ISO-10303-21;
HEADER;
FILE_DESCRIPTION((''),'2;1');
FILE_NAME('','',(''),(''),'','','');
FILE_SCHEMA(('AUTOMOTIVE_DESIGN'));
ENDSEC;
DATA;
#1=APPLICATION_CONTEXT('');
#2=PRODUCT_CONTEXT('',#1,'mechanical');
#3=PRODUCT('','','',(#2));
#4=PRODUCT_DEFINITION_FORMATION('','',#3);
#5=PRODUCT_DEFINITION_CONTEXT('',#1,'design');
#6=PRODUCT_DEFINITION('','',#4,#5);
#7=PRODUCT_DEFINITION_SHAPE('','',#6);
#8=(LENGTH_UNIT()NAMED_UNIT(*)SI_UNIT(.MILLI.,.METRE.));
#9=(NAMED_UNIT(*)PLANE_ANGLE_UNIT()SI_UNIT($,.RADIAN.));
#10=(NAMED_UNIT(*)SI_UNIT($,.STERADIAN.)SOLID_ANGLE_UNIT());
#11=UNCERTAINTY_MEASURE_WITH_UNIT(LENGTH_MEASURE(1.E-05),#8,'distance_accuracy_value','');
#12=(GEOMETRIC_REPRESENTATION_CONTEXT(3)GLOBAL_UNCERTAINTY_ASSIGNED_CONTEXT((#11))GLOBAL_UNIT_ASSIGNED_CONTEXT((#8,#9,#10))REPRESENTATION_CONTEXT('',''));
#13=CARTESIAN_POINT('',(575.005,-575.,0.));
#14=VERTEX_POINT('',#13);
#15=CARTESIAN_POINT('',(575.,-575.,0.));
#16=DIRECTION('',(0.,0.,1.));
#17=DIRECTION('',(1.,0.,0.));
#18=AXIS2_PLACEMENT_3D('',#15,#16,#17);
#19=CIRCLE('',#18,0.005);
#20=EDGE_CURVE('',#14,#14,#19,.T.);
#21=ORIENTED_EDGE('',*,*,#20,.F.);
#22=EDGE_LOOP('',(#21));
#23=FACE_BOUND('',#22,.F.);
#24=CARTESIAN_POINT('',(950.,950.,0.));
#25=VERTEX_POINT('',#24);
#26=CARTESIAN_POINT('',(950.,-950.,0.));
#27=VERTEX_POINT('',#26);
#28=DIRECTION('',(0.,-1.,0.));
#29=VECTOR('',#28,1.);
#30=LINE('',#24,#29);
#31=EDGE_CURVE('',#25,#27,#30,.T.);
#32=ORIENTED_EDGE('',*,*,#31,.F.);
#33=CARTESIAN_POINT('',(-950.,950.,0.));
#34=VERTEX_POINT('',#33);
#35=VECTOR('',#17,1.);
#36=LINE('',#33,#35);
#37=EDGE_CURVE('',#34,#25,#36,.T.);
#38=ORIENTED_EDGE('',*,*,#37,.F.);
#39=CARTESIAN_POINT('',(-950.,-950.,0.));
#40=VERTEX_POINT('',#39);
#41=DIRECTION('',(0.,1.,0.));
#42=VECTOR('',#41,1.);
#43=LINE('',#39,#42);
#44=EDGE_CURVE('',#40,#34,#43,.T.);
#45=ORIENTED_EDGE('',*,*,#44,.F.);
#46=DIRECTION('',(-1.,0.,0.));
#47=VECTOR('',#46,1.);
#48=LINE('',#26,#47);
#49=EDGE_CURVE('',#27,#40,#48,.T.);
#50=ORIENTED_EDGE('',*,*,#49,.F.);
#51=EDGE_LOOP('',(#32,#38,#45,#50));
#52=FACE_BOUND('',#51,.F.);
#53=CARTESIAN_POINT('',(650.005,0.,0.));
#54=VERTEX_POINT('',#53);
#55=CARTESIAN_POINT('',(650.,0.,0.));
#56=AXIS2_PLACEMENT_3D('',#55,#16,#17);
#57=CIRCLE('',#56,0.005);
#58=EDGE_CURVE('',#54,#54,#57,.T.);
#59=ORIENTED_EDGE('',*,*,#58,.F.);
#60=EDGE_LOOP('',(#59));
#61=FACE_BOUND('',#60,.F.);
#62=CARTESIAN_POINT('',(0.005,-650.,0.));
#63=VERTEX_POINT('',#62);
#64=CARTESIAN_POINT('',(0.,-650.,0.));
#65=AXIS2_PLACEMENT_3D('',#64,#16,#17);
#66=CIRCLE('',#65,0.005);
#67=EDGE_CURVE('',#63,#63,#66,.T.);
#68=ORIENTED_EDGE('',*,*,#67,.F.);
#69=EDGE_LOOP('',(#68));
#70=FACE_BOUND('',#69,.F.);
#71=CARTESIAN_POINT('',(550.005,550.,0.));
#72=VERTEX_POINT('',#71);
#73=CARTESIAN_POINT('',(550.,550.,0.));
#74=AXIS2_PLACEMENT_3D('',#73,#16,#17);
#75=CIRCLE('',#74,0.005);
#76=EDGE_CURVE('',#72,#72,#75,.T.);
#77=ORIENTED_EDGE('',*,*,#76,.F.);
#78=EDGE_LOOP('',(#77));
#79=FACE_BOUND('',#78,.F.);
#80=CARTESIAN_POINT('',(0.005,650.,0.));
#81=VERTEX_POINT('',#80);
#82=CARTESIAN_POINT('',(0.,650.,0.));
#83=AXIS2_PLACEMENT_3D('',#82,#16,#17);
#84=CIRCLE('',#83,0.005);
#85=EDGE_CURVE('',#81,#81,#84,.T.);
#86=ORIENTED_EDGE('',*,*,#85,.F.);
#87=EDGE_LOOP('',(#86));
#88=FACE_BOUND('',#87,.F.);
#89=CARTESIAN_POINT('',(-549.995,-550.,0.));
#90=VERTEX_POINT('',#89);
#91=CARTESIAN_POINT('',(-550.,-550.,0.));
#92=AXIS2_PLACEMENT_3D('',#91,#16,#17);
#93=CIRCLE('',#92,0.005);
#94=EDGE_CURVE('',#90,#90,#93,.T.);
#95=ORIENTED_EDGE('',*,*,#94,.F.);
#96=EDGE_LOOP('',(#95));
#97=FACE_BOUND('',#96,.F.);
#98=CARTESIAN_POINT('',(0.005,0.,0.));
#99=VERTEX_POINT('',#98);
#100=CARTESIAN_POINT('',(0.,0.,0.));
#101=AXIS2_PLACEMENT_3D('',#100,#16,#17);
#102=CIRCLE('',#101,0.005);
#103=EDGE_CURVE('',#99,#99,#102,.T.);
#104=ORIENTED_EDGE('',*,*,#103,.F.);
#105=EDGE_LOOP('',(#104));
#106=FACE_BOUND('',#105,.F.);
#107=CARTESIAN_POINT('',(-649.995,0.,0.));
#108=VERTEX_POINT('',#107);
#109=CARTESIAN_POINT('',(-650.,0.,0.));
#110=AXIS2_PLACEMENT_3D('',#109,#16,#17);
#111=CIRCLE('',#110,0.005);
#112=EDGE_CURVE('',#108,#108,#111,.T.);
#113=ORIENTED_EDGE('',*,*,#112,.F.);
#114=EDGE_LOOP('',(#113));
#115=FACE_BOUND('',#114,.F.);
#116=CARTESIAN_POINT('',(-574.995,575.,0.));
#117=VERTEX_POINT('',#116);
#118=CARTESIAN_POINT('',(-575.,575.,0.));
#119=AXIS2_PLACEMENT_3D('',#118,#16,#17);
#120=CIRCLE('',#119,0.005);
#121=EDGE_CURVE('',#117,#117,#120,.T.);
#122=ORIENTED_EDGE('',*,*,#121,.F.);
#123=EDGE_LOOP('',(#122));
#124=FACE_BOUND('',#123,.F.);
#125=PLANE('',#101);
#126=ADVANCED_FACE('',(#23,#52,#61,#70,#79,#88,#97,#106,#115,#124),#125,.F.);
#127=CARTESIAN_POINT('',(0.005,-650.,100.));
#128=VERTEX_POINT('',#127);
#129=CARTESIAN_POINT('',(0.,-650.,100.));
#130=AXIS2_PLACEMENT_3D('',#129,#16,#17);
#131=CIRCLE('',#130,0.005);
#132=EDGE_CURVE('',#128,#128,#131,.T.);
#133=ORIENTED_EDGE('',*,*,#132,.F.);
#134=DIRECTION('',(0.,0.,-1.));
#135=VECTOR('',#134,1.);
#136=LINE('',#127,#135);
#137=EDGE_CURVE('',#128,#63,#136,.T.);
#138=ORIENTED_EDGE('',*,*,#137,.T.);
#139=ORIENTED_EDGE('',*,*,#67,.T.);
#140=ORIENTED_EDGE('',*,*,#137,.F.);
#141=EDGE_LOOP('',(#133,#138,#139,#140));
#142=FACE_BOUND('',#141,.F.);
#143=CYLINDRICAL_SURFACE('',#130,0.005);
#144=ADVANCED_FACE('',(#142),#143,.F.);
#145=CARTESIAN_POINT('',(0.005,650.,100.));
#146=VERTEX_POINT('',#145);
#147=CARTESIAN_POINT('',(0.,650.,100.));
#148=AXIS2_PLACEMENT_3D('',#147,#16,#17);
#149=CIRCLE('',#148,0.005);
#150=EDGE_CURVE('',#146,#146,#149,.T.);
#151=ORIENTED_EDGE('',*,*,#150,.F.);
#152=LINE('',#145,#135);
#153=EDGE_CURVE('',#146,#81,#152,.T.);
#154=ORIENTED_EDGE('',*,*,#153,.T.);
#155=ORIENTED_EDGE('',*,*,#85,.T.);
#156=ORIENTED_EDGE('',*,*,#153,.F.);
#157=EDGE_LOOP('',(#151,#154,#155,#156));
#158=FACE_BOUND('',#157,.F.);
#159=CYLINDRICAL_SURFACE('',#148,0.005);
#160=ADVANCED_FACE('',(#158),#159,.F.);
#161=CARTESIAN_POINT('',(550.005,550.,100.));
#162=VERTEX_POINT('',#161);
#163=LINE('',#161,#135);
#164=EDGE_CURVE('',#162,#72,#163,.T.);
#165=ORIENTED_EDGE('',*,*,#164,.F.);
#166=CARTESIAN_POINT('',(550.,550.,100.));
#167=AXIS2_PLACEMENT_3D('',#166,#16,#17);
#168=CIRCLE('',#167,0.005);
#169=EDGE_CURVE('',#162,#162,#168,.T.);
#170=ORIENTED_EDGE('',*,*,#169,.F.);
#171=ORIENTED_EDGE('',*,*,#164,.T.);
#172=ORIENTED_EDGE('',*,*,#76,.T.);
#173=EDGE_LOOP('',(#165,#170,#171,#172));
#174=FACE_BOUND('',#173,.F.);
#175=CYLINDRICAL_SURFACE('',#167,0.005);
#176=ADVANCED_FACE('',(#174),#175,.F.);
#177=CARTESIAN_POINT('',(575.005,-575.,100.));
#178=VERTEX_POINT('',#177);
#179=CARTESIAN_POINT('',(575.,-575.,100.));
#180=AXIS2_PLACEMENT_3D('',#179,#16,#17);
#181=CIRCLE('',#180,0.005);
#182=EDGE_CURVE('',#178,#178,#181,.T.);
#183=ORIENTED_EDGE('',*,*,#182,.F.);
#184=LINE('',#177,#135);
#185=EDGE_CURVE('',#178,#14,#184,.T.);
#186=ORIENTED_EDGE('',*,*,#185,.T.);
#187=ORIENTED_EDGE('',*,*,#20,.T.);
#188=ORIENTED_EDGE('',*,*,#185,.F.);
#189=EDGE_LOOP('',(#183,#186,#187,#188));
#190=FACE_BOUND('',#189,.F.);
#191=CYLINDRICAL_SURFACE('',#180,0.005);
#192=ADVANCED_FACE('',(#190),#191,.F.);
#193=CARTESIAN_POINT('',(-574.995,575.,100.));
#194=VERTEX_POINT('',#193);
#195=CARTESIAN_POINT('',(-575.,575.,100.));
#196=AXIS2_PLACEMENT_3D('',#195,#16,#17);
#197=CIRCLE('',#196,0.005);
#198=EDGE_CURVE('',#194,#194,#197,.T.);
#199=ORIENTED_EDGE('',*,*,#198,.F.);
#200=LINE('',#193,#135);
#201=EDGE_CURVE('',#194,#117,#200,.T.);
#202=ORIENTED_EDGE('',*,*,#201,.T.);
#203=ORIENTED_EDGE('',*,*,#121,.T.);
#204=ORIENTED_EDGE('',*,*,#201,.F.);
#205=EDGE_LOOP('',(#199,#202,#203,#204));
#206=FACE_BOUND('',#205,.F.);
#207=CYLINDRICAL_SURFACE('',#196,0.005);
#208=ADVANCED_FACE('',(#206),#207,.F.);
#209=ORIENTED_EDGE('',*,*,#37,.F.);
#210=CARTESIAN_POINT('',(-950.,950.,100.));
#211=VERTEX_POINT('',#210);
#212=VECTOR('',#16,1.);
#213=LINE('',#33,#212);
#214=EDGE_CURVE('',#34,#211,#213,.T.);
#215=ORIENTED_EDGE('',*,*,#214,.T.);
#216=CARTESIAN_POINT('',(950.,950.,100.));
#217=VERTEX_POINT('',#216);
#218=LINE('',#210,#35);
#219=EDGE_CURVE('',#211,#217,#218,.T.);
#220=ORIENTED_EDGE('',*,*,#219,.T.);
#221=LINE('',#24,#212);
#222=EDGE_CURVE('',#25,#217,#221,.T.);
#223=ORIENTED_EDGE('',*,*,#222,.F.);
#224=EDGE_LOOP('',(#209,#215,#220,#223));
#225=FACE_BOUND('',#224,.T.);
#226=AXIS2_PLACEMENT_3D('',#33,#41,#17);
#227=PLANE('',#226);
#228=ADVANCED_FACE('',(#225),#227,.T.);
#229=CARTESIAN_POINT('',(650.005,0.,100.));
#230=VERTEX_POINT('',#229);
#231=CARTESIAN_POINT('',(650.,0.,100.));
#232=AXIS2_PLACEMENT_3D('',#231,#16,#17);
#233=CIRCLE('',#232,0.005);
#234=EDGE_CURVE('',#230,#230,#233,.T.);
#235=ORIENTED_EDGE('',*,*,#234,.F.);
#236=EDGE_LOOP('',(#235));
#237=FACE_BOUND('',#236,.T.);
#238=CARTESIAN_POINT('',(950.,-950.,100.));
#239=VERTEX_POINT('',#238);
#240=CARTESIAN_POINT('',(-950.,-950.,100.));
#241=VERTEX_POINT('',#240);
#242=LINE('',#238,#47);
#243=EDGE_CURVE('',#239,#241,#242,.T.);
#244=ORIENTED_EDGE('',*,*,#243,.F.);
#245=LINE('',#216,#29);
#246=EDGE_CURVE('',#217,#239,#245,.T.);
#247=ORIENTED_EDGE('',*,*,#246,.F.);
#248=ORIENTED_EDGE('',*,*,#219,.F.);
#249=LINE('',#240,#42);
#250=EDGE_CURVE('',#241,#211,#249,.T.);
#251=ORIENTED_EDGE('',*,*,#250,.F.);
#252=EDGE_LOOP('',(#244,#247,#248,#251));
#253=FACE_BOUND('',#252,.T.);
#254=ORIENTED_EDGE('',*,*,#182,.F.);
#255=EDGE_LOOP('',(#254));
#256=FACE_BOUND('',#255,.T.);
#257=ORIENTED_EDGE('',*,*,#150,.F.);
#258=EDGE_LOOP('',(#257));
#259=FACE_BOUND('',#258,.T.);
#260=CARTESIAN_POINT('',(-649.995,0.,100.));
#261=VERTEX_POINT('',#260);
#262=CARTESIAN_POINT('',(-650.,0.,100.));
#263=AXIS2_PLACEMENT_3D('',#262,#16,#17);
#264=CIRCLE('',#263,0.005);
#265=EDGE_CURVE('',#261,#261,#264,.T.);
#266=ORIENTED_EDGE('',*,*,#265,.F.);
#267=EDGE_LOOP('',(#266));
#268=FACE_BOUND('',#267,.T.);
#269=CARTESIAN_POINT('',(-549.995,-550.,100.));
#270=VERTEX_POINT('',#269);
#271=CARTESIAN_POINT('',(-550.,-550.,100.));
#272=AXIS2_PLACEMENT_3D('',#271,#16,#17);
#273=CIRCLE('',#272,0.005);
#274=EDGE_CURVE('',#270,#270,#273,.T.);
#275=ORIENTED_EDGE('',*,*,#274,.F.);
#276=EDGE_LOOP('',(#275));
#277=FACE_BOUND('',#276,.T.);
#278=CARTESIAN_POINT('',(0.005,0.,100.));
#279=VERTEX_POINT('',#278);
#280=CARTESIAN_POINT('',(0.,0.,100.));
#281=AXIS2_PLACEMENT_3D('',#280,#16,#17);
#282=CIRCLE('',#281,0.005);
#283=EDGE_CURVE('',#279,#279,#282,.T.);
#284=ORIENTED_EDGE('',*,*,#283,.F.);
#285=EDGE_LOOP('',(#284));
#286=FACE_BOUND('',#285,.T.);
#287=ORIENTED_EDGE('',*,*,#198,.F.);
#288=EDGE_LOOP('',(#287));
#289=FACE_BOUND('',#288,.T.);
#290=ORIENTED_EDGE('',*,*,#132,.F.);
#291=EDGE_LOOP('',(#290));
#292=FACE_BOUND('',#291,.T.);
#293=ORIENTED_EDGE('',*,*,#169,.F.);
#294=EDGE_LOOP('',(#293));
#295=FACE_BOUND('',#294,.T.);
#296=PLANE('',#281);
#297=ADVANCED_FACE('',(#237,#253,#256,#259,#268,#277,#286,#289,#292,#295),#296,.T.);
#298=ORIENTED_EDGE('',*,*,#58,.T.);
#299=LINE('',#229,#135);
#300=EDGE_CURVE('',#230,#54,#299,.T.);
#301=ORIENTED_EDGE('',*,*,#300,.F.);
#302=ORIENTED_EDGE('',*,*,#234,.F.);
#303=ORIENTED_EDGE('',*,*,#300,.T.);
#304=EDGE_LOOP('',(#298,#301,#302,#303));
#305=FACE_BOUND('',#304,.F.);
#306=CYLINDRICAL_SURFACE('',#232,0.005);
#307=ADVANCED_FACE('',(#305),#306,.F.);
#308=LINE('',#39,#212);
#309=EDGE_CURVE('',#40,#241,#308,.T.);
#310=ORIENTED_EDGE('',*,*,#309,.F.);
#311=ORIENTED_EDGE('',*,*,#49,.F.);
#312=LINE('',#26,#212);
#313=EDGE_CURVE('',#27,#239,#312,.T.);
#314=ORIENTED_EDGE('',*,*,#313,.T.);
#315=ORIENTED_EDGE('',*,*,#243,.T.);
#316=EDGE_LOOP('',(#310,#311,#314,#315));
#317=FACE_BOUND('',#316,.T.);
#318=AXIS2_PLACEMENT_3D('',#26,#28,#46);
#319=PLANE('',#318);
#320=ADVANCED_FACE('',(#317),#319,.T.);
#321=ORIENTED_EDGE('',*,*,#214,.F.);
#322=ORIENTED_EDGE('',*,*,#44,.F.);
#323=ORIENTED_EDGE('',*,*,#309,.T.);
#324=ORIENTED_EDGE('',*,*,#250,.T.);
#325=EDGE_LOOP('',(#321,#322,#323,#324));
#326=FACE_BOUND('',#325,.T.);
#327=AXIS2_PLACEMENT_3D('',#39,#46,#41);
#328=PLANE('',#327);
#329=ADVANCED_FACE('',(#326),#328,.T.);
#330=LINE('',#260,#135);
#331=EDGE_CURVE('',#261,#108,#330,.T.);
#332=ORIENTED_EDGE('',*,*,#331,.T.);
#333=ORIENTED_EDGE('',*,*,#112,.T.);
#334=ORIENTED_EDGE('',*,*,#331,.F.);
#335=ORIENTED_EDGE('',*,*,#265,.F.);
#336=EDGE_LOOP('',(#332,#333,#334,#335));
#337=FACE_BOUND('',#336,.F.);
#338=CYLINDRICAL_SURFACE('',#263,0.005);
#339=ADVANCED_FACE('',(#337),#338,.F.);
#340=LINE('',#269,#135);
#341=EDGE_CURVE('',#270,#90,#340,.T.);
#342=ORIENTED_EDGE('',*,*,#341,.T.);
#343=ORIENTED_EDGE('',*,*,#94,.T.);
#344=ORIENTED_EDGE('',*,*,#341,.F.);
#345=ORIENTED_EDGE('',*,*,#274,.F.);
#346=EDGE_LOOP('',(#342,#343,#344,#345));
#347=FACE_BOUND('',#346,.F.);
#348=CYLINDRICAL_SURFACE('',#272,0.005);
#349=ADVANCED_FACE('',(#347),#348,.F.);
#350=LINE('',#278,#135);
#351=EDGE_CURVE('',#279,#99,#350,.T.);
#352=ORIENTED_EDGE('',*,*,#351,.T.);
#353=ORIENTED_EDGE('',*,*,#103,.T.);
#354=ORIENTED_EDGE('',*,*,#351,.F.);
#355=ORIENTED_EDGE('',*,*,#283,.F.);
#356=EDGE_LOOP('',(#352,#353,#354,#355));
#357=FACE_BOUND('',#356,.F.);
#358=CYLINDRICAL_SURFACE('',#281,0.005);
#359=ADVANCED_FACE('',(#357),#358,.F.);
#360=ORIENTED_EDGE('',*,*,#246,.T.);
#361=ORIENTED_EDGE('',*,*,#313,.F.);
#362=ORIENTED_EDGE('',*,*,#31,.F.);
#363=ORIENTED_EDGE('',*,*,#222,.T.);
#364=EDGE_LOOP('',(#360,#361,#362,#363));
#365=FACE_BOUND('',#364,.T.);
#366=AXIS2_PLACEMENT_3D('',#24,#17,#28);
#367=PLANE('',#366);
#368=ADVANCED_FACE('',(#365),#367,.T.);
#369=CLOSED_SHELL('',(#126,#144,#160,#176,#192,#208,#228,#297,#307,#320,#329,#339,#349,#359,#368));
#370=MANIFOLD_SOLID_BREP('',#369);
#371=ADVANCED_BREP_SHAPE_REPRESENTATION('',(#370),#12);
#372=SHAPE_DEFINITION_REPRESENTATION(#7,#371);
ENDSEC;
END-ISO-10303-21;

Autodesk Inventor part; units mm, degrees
ref_plane "YZ Plane" through (0, 0, 0) normal (1, 0, 0) x (0, 1, 0)
ref_plane "XZ Plane" through (0, 0, 0) normal (0, 1, 0) x (-1, 0, 0)
ref_plane "XY Plane" through (0, 0, 0) normal (0, 0, 1) x (1, 0, 0)
sketch "スケッチ1" plane through (0, 0, 0) normal (0, 0, 1) x (1, 0, 0)
  line L0 (-950, -950) -> (-950, 950)
  line L1 (-950, 950) -> (950, 950)
  line L2 (950, 950) -> (950, -950)
  line L3 (950, -950) -> (-950, -950)
  point P0 (0, 0)
  point P1 (0, 0)
  dimension "d0" = 1900
extrude "押し出し1" add sketch "スケッチ1" along normal blind 100
sketch "スケッチ3" plane through (0, 0, 100) normal (0, 0, 1) x (1, 0, 0)
  circle A0 centre (0, 0) radius 0.005
  line L0 (-950, 950) -> (-950, -950) projected
  line L1 (-950, -950) -> (950, -950) projected
  line L2 (950, -950) -> (950, 950) projected
  line L3 (950, 950) -> (-950, 950) projected
  line L4 (-950, 950) -> (-950, 575)
  line L5 (-950, 950) -> (-950, -950) projected
  line L6 (-950, 575) -> (-575, 575)
  circle A1 centre (-575, 575) radius 0.005
  line L7 (950, -950) -> (950, -575)
  line L8 (950, -950) -> (950, 950) projected
  line L9 (950, -575) -> (575, -575)
  circle A2 centre (575, -575) radius 0.005
  line L10 (-950, -950) -> (0, -950)
  line L11 (0, -950) -> (0, -650)
  circle A3 centre (0, -650) radius 0.005
  line L12 (950, 950) -> (0, 950)
  line L13 (950, 950) -> (-950, 950) projected
  line L14 (0, 950) -> (0, 650)
  circle A4 centre (0, 650) radius 0.005
  line L15 (-950, -950) -> (-550, -950)
  line L16 (-950, -950) -> (950, -950) projected
  line L17 (-550, -950) -> (-550, -550)
  circle A5 centre (-550, -550) radius 0.005
  line L18 (950, 950) -> (550, 950)
  line L19 (550, 950) -> (550, 550)
  circle A6 centre (550, 550) radius 0.005
  line L20 (-950, -950) -> (-950, 0)
  line L21 (-950, 0) -> (-650, 0)
  line L22 (950, 950) -> (950, 0)
  line L23 (950, 0) -> (650, 0)
  circle A7 centre (-650, 0) radius 0.005
  circle A8 centre (650, 0) radius 0.005
  dimension "d8" = 0.01
  dimension "d9" = 375
  dimension "d10" = 375
  dimension "d11" = 0.01
  dimension "d12" = 375
  dimension "d13" = 375
  dimension "d14" = 0.01
  dimension "d15" = 300
  dimension "d16" = 0.01
  dimension "d17" = 300
  dimension "d18" = 0.01
  dimension "d19" = 400
  dimension "d20" = 400
  dimension "d21" = 0.01
  dimension "d22" = 400
  dimension "d23" = 400
  dimension "d24" = 0.01
  dimension "d25" = 300
  dimension "d26" = 300
  dimension "d27" = 0.01
  dimension "d28" = 0.01
sketch "スケッチ3 outline for 押し出し2" plane through (0, 0, 100) normal (0, 0, 1) x (1, 0, 0)
  circle A0 centre (0, 0) radius 0.005
  circle A1 centre (-575, 575) radius 0.005
  circle A2 centre (575, -575) radius 0.005
  circle A3 centre (0, -650) radius 0.005
  circle A4 centre (0, 650) radius 0.005
  circle A5 centre (-550, -550) radius 0.005
  circle A6 centre (550, 550) radius 0.005
  circle A7 centre (-650, 0) radius 0.005
  circle A8 centre (650, 0) radius 0.005
extrude "押し出し2" cut sketch "スケッチ3 outline for 押し出し2" against normal blind 100
properties part number "リング"
